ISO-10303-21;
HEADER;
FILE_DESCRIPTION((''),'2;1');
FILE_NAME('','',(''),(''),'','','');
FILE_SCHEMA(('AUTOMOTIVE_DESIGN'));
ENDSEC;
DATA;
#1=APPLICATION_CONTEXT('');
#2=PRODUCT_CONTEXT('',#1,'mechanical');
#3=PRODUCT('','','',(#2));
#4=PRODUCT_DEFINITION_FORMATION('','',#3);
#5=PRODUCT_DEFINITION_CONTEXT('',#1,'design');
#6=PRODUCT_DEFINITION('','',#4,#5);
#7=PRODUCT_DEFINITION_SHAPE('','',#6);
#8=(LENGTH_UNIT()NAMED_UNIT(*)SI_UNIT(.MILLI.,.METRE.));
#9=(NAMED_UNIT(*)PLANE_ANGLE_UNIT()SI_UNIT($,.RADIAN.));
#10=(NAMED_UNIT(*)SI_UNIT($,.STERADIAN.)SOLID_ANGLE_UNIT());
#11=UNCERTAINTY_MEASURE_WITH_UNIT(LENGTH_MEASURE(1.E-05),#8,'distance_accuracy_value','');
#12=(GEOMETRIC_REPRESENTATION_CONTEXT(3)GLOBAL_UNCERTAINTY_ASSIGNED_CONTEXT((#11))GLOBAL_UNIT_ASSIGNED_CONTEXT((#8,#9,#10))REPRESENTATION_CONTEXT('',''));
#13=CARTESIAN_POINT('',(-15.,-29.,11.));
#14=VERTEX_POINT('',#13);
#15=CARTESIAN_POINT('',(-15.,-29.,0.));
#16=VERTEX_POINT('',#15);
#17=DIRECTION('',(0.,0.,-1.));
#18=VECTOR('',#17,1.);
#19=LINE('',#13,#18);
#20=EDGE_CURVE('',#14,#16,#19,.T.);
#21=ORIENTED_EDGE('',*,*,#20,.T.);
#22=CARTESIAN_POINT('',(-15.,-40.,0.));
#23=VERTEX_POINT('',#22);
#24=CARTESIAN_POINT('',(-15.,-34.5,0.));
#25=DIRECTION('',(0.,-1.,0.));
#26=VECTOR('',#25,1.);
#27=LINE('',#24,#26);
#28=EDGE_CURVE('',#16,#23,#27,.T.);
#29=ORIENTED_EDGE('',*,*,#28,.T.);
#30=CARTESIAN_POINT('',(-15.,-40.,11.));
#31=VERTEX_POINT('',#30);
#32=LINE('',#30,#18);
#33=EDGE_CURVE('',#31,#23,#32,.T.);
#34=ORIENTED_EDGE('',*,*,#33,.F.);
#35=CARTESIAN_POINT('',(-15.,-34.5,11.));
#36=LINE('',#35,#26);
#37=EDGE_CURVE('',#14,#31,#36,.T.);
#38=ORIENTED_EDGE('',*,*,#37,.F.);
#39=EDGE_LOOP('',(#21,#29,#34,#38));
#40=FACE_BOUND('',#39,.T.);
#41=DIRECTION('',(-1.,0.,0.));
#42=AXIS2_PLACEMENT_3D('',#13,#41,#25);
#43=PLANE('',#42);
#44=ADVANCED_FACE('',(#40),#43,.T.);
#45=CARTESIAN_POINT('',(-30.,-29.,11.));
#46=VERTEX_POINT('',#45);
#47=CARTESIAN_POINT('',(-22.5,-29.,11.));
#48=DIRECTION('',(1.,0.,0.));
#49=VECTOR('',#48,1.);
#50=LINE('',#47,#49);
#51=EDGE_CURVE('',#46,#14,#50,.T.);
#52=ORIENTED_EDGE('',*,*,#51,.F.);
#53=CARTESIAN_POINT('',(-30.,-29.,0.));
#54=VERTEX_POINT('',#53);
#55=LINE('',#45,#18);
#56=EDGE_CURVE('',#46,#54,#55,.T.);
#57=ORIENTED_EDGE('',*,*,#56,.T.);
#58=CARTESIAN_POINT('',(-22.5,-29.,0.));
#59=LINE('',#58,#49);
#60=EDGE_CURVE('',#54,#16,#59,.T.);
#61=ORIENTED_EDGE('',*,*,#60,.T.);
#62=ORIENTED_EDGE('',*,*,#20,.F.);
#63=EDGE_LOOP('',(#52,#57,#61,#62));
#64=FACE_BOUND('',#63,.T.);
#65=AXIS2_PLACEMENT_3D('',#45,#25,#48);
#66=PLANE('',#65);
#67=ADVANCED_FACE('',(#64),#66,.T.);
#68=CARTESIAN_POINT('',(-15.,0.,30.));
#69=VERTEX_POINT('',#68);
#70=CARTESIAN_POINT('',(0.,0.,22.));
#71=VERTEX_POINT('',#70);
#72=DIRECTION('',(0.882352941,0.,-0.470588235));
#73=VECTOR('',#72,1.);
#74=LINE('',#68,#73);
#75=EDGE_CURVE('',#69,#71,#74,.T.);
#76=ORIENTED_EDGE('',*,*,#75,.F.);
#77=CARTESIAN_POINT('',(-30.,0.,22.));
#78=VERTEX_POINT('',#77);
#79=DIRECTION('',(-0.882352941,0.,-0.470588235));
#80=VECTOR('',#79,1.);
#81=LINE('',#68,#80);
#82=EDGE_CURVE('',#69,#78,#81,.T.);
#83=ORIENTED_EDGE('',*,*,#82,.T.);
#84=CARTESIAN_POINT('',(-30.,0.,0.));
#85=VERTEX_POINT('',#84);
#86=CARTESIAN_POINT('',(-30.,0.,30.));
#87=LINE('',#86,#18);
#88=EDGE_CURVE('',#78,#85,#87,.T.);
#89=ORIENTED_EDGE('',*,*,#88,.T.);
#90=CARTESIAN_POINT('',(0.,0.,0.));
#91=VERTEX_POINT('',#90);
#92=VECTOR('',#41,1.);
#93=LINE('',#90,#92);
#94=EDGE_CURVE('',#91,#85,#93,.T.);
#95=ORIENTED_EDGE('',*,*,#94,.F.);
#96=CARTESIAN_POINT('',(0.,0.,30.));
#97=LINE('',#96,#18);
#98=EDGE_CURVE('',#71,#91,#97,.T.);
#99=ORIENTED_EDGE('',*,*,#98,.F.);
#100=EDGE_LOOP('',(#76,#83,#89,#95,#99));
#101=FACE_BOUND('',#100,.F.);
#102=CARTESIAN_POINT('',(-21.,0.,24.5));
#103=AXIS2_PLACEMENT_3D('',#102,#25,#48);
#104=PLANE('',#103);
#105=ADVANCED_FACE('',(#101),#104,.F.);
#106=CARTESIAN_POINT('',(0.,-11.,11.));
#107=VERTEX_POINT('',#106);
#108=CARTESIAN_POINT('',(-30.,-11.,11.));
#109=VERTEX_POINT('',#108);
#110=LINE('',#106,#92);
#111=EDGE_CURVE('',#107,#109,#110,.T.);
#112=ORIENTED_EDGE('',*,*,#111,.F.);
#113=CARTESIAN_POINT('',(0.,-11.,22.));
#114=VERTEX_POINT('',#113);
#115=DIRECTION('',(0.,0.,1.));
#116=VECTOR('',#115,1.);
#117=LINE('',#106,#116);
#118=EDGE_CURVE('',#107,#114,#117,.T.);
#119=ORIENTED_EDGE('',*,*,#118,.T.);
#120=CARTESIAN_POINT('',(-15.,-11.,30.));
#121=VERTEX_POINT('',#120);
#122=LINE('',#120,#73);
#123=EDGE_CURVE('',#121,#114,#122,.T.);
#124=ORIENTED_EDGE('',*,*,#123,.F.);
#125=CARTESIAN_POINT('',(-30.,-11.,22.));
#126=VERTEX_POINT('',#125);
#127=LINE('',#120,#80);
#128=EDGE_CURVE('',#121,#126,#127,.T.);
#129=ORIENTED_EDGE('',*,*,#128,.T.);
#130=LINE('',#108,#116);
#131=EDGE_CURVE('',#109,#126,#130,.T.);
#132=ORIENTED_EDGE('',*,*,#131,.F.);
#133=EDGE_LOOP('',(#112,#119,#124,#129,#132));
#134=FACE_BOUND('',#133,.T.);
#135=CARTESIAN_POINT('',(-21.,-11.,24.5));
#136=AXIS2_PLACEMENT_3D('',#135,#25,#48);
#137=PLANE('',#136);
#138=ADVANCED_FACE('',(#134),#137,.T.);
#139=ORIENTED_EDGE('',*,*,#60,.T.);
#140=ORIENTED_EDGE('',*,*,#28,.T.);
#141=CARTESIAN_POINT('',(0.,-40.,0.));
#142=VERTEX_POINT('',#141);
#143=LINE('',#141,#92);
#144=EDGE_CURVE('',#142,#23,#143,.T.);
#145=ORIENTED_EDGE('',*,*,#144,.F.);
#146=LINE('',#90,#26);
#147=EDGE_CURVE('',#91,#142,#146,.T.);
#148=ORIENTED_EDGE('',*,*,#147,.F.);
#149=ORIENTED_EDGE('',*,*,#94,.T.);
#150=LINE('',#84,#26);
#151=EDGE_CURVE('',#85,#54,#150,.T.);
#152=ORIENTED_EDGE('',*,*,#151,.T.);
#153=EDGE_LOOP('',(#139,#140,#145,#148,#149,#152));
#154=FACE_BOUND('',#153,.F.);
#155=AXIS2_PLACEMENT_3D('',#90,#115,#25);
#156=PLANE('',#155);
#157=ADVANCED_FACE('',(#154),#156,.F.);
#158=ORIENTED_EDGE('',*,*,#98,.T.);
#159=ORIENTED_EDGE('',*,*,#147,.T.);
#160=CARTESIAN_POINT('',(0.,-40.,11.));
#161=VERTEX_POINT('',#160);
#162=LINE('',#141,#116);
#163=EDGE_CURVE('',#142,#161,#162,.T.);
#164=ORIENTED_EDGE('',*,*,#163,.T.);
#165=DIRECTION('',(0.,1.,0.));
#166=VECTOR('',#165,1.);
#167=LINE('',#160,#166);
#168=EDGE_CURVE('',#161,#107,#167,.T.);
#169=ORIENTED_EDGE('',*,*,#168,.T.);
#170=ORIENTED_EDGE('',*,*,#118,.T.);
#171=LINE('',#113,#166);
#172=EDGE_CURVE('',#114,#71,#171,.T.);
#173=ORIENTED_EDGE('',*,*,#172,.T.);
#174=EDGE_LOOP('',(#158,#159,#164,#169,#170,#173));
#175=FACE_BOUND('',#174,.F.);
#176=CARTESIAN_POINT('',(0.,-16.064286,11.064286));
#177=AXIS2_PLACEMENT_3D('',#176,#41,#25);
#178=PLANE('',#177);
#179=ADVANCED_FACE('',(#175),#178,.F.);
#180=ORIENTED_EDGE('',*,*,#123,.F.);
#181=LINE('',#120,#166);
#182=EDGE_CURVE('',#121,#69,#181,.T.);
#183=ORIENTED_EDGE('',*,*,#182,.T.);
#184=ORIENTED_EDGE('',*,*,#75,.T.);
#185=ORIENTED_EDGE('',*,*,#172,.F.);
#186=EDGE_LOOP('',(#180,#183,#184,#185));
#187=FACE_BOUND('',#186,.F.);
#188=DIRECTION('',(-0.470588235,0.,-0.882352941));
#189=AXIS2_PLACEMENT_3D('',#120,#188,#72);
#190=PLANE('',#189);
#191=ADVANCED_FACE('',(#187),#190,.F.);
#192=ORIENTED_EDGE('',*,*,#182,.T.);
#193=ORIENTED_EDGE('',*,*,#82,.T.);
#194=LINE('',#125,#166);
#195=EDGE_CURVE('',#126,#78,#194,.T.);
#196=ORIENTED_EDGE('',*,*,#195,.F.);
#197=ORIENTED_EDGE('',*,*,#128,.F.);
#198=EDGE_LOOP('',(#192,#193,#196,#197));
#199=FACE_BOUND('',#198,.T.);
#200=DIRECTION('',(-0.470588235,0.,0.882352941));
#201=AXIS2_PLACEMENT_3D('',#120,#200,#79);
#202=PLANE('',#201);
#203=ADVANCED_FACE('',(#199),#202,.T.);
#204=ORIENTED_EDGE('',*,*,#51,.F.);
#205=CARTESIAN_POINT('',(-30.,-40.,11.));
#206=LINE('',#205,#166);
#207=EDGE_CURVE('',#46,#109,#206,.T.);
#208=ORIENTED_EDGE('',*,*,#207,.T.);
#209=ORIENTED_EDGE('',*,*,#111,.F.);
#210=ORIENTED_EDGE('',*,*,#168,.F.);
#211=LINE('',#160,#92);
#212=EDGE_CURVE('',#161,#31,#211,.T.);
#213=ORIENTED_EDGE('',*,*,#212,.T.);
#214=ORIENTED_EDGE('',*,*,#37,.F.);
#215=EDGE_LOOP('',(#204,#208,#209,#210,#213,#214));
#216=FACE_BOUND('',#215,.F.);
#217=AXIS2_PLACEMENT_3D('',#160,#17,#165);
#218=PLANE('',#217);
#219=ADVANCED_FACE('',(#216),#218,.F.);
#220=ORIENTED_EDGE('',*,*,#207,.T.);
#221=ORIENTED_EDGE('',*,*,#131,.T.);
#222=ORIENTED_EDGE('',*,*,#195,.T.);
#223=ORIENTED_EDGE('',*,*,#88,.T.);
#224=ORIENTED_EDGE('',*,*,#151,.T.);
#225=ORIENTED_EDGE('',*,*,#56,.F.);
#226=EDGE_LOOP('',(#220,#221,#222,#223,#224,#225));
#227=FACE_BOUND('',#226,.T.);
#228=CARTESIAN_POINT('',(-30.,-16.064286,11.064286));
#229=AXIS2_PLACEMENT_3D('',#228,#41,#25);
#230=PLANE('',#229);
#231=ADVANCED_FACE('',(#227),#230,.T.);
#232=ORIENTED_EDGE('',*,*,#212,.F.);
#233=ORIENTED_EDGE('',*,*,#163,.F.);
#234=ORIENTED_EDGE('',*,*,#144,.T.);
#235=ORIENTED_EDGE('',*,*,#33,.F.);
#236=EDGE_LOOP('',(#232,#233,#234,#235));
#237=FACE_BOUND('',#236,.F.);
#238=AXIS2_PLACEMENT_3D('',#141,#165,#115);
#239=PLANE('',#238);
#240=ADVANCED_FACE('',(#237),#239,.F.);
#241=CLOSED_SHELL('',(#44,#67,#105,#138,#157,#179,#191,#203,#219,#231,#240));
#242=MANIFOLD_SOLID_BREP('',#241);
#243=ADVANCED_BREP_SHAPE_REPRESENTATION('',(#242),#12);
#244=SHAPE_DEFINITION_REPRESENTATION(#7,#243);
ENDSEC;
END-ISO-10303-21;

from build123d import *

# Parameters (mm, degrees)
F1_DEPTH  = 30
F2_W      = 11
F2_H      = 15
F3_DEPTH  = 11
F4_W      = 15
F4_H      = 8
F5_DEPTH  = 11
F6_ANGLE  = -90
F8_DEPTH  = 11
F10_DEPTH = 11


with BuildPart() as f1:
    # F0 (on Front) → F1 (new body)
    with BuildSketch(Plane.XZ):
        Polygon((0, 30), (0, 0), (40, 0), (40, 11), (11, 11), (11, 30), align=None)
    extrude(amount=F1_DEPTH)

    # F2 (on face) → F3 (cut, through all)
    with BuildSketch(Plane.XY.offset(11)):
        with Locations((34.5, -22.5)):
            Rectangle(F2_W, F2_H)
    extrude(amount=-F3_DEPTH, mode=Mode.SUBTRACT)

    # F4 (on face) → F5 (cut, through all)
    with BuildSketch(Plane.YZ.offset(11)):
        with Locations((-22.5, 26)):
            Rectangle(F4_W, F4_H)
    extrude(amount=-F5_DEPTH, mode=Mode.SUBTRACT)


with BuildPart() as f1_1:
    # F6: moved
    add(f1.part.rotate(Axis((0, 0, 15), (0, 0, 1)), F6_ANGLE))

    # F7 (on face) → F8 (join, through all)
    with BuildSketch(Plane.XZ.offset(11)):
        Polygon((-15, 22), (-15, 30), (-30, 22), align=None)
    extrude(amount=-F8_DEPTH)

    # F9 (on face) → F10 (cut, through all)
    with BuildSketch(Plane.XZ.offset(11)):
        Polygon((0, 30), (-15, 30), (0, 22), align=None)
    extrude(amount=-F10_DEPTH, mode=Mode.SUBTRACT)


solid = f1_1.part
